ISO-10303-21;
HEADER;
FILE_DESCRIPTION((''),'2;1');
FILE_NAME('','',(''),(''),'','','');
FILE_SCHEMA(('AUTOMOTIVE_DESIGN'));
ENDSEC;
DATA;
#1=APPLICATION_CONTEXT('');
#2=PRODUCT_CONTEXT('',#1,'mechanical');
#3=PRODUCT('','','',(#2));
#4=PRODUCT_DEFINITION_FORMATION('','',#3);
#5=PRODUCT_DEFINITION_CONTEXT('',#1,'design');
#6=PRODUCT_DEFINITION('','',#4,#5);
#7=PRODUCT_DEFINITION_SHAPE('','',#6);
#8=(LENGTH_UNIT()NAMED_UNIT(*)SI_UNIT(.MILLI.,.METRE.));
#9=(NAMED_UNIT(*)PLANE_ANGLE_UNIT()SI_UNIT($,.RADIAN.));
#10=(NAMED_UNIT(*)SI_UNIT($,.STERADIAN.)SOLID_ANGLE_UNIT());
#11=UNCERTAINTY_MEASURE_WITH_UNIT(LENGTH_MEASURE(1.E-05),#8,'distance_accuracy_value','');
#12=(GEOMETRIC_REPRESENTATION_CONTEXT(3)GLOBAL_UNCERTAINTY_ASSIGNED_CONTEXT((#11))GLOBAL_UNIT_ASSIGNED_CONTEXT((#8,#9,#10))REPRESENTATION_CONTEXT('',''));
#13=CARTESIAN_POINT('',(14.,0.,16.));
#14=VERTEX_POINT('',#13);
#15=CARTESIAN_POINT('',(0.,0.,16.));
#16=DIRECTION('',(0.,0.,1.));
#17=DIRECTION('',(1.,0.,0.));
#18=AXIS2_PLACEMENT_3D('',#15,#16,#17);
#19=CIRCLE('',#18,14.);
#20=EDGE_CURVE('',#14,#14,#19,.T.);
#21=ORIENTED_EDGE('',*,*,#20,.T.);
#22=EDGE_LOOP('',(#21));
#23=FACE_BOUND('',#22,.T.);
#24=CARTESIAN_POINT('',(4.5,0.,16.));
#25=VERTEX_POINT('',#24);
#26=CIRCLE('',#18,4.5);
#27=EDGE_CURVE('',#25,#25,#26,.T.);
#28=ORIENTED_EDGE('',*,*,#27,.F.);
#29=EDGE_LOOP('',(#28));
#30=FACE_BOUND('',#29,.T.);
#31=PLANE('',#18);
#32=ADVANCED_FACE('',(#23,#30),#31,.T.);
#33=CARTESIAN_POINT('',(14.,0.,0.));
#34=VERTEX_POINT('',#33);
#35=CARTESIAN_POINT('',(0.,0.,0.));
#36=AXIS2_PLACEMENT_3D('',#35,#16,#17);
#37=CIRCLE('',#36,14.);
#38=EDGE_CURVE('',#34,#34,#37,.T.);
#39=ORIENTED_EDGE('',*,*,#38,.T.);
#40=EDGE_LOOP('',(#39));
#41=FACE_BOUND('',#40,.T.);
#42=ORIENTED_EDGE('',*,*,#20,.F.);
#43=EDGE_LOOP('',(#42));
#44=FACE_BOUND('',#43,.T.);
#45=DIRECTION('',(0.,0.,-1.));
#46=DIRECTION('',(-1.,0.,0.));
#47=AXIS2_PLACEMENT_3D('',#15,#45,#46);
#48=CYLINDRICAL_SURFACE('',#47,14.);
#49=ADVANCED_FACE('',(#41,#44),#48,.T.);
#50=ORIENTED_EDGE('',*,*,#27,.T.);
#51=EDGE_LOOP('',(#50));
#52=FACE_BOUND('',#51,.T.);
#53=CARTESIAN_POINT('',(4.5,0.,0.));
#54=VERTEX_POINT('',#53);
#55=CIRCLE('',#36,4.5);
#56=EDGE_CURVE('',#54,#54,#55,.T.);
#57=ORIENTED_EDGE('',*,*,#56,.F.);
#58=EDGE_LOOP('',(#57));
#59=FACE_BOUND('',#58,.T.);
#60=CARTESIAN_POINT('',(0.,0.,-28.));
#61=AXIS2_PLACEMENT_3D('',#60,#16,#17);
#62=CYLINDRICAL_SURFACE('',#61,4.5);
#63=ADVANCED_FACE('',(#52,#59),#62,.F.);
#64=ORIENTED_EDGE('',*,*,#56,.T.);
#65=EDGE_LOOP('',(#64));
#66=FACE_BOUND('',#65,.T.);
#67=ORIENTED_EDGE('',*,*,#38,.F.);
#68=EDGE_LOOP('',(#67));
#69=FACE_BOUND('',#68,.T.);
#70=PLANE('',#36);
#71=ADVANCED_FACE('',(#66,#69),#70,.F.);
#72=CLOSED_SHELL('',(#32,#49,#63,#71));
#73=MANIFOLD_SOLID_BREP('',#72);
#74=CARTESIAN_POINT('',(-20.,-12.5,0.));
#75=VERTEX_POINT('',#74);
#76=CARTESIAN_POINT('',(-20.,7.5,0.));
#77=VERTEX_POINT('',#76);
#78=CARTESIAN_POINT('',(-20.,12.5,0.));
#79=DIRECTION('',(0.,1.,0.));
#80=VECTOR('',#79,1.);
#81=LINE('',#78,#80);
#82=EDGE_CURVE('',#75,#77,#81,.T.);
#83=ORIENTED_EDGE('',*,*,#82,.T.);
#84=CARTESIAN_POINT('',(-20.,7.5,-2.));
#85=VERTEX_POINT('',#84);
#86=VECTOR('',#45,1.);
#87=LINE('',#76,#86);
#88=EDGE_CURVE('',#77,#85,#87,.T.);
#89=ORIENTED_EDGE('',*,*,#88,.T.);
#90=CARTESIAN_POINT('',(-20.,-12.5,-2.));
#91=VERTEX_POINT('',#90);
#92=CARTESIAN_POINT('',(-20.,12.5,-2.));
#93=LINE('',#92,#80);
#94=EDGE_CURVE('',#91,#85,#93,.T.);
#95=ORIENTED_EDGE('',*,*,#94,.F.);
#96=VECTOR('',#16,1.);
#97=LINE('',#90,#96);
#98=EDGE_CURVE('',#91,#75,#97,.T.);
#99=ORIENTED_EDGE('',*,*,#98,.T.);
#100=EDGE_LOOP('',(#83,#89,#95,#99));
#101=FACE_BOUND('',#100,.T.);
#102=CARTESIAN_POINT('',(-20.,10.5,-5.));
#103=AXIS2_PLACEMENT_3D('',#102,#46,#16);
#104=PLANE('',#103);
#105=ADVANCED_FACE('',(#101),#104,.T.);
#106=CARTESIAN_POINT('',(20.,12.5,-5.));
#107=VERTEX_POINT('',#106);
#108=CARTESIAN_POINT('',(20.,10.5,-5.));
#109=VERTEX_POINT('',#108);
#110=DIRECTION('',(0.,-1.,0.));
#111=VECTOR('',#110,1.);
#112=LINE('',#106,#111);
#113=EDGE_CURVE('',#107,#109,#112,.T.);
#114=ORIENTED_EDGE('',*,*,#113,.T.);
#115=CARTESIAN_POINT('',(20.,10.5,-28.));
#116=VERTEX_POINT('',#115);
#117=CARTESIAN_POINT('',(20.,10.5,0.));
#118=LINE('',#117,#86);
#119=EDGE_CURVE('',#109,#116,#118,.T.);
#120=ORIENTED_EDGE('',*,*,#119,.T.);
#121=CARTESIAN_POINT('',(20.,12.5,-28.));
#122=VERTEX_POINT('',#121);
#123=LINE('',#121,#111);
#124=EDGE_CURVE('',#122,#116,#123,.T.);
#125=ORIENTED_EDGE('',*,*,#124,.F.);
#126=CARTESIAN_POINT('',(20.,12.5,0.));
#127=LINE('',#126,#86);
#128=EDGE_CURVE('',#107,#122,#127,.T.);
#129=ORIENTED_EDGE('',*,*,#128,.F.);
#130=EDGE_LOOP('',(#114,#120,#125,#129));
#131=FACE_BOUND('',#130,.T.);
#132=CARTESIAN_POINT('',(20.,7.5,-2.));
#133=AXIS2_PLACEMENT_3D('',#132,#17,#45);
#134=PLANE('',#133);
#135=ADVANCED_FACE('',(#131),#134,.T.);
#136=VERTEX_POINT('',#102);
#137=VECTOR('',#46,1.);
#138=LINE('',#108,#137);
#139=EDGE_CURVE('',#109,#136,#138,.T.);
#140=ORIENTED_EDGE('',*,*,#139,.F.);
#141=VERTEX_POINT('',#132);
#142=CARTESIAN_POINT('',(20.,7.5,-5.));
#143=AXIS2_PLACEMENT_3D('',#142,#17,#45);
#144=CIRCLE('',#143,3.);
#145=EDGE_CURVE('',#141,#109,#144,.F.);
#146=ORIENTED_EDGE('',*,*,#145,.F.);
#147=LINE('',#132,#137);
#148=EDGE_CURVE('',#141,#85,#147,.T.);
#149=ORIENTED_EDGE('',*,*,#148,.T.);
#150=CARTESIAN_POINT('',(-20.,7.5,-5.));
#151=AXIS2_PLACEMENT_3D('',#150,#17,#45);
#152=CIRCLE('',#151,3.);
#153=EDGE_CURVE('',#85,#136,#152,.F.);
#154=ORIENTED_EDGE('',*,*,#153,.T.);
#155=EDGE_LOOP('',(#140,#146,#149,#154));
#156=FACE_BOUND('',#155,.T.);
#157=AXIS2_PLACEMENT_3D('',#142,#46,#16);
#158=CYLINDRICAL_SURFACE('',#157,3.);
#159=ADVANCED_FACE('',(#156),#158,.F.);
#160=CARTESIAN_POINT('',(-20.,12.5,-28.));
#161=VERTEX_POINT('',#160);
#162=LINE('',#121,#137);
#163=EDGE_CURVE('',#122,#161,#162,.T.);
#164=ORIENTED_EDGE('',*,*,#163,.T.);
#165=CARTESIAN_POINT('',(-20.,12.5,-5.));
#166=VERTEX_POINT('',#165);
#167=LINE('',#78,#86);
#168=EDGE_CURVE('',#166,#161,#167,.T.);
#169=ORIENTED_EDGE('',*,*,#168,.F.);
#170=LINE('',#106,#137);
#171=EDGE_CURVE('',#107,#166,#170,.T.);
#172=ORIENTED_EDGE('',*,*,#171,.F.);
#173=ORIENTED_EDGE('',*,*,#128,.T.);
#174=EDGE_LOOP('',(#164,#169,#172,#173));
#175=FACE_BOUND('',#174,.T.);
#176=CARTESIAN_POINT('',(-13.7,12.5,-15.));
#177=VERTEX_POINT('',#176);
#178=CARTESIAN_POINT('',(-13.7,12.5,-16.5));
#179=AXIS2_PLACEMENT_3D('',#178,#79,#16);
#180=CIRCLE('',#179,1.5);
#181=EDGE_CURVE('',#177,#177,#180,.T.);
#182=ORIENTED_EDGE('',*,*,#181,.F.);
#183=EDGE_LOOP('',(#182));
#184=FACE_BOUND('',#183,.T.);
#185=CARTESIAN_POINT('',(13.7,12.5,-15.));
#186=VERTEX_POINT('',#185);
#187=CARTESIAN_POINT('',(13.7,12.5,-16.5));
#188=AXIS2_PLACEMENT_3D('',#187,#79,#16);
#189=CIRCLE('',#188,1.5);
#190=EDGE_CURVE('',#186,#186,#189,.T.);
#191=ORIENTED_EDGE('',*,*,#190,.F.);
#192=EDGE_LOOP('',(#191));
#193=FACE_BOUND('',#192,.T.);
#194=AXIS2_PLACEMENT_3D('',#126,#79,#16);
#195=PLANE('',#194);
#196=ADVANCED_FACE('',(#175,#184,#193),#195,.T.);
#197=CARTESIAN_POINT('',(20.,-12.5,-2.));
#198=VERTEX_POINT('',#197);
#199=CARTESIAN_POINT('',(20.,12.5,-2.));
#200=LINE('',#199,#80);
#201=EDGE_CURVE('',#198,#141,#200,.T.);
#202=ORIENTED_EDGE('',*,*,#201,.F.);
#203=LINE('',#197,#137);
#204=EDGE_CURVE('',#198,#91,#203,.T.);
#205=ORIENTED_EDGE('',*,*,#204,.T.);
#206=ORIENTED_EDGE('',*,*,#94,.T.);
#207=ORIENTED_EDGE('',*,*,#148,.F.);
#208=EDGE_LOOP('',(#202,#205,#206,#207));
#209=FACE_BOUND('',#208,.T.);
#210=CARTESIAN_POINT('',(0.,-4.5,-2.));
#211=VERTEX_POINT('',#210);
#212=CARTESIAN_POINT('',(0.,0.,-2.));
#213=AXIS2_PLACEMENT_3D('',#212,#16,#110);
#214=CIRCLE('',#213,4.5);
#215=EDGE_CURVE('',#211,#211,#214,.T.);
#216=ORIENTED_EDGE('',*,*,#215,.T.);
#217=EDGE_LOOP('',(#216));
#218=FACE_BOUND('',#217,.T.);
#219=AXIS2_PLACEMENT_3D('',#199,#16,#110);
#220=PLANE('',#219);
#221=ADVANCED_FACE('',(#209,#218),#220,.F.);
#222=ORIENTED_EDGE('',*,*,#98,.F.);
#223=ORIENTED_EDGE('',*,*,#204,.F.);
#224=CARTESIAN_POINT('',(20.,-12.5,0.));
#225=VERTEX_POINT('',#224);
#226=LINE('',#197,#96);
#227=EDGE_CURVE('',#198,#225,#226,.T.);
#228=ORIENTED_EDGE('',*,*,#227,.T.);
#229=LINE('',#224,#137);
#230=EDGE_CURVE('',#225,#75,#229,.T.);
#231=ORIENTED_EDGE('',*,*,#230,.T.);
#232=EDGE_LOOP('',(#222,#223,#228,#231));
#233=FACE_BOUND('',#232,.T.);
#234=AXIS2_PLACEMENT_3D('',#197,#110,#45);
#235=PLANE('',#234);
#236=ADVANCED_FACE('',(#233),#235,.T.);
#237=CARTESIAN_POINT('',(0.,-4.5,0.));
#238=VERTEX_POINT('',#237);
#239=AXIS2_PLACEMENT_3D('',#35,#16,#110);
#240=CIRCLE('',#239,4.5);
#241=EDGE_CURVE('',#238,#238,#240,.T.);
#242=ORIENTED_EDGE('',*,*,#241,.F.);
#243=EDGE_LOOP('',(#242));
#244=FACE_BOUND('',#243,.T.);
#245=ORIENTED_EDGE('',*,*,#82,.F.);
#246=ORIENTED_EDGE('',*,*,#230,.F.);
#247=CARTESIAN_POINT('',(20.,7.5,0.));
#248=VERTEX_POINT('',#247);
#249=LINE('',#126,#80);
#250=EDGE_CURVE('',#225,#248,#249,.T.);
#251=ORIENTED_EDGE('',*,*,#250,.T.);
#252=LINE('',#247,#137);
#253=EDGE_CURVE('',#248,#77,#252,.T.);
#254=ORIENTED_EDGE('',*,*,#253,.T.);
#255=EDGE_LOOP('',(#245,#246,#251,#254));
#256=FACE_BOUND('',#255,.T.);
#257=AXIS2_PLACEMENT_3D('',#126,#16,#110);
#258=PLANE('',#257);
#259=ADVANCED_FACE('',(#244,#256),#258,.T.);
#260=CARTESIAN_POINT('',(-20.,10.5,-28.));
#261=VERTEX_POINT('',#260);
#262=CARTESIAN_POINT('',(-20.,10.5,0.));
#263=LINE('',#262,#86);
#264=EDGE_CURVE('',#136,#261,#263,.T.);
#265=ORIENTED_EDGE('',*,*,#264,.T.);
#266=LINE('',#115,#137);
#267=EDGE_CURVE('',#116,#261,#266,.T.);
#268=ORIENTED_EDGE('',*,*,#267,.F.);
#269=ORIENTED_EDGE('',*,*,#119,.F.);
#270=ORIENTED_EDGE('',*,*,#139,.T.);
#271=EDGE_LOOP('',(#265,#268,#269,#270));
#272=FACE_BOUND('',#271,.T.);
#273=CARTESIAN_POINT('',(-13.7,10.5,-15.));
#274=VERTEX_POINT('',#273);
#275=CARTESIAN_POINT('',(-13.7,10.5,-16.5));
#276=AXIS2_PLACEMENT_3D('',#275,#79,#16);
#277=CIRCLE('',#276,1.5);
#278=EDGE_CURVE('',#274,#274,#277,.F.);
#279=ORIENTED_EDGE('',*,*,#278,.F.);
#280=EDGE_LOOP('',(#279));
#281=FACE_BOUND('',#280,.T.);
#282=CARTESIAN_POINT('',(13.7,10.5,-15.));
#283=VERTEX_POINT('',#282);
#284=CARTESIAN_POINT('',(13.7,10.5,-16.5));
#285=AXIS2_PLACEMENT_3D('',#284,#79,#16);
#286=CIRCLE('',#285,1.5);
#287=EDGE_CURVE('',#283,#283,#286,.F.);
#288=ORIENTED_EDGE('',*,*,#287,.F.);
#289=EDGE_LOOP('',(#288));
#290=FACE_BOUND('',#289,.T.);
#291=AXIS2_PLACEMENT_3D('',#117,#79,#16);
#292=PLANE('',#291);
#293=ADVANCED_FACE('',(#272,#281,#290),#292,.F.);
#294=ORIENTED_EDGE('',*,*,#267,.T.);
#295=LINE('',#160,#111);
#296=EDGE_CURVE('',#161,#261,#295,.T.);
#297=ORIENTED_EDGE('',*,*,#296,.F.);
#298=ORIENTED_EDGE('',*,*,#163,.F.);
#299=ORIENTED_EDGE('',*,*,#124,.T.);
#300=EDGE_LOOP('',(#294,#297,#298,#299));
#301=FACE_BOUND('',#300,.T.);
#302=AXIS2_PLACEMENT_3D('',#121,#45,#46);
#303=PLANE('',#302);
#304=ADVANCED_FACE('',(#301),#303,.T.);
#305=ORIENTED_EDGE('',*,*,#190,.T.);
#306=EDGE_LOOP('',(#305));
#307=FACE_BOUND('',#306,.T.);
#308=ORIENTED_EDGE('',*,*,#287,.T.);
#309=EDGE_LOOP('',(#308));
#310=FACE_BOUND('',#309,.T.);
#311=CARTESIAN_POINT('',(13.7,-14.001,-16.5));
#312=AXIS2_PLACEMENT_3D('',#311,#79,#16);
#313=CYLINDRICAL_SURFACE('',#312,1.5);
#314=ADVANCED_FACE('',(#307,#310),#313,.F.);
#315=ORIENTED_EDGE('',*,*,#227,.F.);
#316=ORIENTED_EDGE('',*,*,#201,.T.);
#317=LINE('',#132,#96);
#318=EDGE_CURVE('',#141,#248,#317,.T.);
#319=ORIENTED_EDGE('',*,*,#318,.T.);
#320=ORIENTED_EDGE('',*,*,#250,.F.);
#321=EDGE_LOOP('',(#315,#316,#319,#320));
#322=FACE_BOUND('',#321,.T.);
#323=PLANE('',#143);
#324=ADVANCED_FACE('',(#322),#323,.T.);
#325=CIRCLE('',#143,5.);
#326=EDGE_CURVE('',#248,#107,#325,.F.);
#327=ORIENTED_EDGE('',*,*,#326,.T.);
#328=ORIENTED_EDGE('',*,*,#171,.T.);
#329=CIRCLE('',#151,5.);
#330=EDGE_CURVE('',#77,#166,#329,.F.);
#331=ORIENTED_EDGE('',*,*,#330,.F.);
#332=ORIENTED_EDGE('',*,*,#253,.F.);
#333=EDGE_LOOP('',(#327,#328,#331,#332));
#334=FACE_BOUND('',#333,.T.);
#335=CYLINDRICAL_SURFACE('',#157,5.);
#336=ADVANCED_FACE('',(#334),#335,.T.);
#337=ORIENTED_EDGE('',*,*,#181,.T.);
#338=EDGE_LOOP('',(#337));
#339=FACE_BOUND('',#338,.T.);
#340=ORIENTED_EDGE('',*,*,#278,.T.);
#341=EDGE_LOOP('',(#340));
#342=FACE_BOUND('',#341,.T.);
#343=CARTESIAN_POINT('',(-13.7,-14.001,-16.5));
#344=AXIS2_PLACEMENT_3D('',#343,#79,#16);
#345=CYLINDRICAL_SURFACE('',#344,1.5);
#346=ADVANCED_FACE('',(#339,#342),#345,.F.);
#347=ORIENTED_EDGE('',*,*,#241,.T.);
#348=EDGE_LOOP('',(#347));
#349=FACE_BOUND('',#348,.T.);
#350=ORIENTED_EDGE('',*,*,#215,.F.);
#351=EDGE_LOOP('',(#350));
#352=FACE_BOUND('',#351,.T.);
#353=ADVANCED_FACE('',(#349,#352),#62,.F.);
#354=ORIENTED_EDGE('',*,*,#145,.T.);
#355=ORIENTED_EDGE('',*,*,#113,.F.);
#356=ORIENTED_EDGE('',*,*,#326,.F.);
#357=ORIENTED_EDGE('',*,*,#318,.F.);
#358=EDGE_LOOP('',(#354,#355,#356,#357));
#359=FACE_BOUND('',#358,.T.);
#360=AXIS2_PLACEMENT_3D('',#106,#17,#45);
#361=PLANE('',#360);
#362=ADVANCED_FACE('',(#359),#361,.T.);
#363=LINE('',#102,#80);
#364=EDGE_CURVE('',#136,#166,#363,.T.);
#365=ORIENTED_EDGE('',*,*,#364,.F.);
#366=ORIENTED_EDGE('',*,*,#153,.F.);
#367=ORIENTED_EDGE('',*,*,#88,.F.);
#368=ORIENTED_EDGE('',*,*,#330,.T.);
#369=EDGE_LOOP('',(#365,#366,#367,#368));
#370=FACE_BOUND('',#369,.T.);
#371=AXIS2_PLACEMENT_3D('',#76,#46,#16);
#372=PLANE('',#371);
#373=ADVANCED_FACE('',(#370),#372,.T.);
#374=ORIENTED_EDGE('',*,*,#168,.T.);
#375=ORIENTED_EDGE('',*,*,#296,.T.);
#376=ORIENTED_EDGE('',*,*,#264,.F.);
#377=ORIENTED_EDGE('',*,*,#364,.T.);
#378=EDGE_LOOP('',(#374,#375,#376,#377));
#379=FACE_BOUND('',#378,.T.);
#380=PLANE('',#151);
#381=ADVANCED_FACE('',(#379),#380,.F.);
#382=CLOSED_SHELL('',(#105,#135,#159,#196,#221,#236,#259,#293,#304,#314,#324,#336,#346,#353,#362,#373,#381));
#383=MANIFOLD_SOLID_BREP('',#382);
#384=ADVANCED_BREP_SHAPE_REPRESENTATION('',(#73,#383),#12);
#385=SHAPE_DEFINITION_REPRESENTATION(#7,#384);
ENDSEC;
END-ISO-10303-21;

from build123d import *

# Parameters (mm, degrees)
SKETCH1_R           = 14
BOSS_EXTRUDE1_DEPTH = 16
BASE_FLANGE1_DEPTH  = 20
SKETCH8_R           = 1.5
CUT_EXTRUDE1_DEPTH  = 2
SKETCH9_R           = 4.5
CUT_EXTRUDE2_DEPTH  = 51.318982502


# Sheet-metal steps are written as plain solids
with BuildPart() as part:
    # Sketch1 → Boss-Extrude1 (new body)
    with BuildSketch(Plane.XY):
        Circle(SKETCH1_R)
    extrude(amount=BOSS_EXTRUDE1_DEPTH)


with BuildPart() as body_2:
    # Sketch3 → Base-Flange1 (new, symmetric)
    with BuildSketch(Plane(origin=(0, 0, 0), x_dir=(0, 0, -1), z_dir=(1, 0, 0))):
        with BuildLine():
            Line((0, -12.5), (0, 7.5))
            ThreePointArc((0, 7.5), (1.464466094, 11.035533906), (5, 12.5))
            Line((5, 12.5), (28, 12.5))
            Line((28, 12.5), (28, 10.5))
            Line((28, 10.5), (5, 10.5))
            ThreePointArc((5, 10.5), (2.878679656, 9.621320344), (2, 7.5))
            Line((2, 7.5), (2, -12.5))
            Line((2, -12.5), (0, -12.5))
        make_face()
    extrude(amount=BASE_FLANGE1_DEPTH, both=True)

    # Sketch8 → Cut-Extrude1 (cut)
    with BuildSketch(Plane(origin=(0, 12.5, 0), x_dir=(1, 0, 0), z_dir=(0, 1, 0))):
        with Locations(Location((-13.7, 16.5, 0), (0, 0, 270))):
            Circle(SKETCH8_R)
        with Locations(Location((13.7, 16.5, 0), (0, 0, 270))):
            Circle(SKETCH8_R)
    extrude(amount=-CUT_EXTRUDE1_DEPTH, mode=Mode.SUBTRACT)


with BuildPart() as cut_extrude2_tool:
    # Sketch9 → Cut-Extrude2 (new, through all)
    with BuildSketch(Plane.XY.offset(16)):
        with Locations(Location((0, 0, 0), (0, 0, 270))):
            Circle(SKETCH9_R)
    extrude(amount=-CUT_EXTRUDE2_DEPTH)


with BuildPart() as part_1:
    add(part.part)

    # Cut-Extrude2: cut by cut_extrude2_tool
    add(cut_extrude2_tool.part, mode=Mode.SUBTRACT)


with BuildPart() as body_2_1:
    add(body_2.part)

    # Cut-Extrude2: cut by cut_extrude2_tool
    add(cut_extrude2_tool.part, mode=Mode.SUBTRACT)


solid = Compound([part_1.part, body_2_1.part])
